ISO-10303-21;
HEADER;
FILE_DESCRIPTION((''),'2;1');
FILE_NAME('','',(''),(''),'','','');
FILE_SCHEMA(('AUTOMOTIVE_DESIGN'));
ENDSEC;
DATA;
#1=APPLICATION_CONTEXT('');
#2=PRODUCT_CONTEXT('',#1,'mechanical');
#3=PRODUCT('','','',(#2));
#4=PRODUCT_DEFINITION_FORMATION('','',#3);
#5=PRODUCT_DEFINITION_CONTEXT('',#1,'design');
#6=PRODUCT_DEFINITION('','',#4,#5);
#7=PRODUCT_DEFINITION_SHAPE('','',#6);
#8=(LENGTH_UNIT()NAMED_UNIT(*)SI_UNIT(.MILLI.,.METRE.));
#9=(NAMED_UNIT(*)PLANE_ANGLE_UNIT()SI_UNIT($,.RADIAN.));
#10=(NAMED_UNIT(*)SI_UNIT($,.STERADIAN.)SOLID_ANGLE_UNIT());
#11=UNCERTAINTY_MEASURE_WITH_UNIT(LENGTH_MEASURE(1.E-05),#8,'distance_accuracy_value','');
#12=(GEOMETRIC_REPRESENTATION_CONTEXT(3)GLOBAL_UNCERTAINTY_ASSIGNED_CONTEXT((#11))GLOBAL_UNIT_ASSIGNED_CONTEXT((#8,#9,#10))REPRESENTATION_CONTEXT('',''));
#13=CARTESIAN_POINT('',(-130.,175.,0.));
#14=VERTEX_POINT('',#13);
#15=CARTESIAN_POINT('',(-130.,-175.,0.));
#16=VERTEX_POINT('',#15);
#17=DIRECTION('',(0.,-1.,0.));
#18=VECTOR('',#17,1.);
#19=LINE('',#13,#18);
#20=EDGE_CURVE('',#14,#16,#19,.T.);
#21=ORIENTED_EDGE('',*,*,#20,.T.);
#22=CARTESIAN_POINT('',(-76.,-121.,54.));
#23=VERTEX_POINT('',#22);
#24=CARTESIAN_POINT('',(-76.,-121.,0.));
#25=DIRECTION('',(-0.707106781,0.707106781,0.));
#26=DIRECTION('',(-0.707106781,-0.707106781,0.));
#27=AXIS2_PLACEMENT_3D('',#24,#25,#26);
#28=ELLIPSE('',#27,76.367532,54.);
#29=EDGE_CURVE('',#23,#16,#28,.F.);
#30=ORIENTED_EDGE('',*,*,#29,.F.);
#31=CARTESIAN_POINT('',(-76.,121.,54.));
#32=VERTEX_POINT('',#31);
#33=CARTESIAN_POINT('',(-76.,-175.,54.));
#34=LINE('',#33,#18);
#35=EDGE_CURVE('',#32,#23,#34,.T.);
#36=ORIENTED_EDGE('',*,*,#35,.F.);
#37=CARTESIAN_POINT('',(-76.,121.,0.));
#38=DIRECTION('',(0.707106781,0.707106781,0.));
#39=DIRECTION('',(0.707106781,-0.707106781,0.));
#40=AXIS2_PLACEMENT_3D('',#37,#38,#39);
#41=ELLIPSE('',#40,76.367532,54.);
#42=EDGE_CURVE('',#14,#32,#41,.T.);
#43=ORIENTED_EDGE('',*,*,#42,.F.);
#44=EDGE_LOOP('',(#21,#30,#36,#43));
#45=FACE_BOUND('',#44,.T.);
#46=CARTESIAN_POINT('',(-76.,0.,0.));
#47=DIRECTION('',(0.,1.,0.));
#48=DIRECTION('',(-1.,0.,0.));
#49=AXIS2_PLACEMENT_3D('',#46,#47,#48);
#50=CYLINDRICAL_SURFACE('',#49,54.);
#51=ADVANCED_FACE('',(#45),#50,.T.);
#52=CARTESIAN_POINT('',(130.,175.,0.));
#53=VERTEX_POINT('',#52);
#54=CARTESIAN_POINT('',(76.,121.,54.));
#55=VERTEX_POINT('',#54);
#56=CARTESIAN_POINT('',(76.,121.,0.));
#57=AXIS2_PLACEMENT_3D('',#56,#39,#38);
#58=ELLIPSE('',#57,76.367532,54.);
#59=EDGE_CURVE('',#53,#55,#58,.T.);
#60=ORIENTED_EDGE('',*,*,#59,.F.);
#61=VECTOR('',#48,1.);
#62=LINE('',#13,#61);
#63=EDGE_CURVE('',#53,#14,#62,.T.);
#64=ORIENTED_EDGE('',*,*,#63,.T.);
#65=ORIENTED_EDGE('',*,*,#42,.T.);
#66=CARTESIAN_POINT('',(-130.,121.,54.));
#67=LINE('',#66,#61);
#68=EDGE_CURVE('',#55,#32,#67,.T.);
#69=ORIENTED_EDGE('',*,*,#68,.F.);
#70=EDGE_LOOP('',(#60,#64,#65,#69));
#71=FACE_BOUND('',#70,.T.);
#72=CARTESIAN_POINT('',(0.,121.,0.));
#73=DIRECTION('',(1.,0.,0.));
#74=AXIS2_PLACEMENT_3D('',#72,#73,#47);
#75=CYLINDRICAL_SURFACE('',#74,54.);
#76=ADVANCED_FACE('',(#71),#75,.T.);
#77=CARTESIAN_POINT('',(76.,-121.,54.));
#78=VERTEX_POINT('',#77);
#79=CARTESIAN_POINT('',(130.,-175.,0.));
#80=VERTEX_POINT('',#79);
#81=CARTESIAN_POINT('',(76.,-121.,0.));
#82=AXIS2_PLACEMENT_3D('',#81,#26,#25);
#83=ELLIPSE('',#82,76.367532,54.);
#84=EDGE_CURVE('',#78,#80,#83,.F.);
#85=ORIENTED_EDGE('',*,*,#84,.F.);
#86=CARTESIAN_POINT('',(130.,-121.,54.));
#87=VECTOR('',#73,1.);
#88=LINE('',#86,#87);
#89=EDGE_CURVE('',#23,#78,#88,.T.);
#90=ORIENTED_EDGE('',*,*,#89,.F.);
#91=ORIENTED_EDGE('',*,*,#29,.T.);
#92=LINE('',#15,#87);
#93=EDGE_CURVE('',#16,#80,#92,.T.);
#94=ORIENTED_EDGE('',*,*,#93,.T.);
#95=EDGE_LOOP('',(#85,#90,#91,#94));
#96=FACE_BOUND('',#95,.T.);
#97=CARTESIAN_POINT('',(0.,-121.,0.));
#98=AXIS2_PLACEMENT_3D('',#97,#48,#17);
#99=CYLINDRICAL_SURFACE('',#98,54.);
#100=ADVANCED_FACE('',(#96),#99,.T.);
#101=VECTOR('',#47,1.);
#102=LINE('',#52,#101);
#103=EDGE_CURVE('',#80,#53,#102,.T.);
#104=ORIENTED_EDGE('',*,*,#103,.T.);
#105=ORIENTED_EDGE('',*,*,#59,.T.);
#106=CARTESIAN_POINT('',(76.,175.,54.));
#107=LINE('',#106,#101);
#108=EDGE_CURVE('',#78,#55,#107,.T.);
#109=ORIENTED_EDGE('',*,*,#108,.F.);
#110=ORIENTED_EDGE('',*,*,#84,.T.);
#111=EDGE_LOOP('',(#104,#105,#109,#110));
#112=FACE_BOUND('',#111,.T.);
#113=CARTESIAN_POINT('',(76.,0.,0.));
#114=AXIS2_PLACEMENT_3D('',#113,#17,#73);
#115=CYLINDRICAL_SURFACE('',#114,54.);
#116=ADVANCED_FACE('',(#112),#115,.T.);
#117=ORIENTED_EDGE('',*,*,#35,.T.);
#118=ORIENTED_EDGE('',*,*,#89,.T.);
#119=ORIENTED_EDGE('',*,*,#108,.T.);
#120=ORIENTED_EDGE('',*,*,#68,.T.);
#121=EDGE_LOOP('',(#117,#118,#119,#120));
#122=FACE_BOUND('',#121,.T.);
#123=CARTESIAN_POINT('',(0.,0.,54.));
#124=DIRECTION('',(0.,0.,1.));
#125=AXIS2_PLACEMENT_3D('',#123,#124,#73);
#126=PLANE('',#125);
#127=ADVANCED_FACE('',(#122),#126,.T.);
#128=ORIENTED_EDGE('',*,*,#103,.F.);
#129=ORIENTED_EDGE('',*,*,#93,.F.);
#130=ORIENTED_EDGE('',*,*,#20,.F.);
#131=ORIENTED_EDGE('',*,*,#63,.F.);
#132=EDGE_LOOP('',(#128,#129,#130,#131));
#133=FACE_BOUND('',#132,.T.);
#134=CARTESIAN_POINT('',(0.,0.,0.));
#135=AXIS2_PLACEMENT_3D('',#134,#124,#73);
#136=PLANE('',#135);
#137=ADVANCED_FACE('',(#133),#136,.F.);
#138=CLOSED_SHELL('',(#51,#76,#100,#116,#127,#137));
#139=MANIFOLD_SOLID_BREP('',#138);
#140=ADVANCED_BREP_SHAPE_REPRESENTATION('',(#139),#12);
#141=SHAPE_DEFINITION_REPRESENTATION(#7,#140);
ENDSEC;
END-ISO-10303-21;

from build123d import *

# Parameters (mm, degrees)
SKETCH1_W           = 260
SKETCH1_H           = 350
BOSS_EXTRUDE1_DEPTH = 54
FILLET1_R           = 54


with BuildPart() as part:
    # Sketch1 → Boss-Extrude1 (new body)
    with BuildSketch(Plane.XY):
        Rectangle(SKETCH1_W, SKETCH1_H)
    extrude(amount=BOSS_EXTRUDE1_DEPTH)

    # Fillet1
    fillet1_edges = [part.edges().sort_by_distance(p)[0] for p in [
        (130, 0, 54),
        (-130, 0, 54),
        (0, -175, 54),
        (0, 175, 54),
    ]]
    fillet(fillet1_edges, radius=FILLET1_R - 0.0001)  # a hair under: the kernel refuses the full size


solid = part.part
